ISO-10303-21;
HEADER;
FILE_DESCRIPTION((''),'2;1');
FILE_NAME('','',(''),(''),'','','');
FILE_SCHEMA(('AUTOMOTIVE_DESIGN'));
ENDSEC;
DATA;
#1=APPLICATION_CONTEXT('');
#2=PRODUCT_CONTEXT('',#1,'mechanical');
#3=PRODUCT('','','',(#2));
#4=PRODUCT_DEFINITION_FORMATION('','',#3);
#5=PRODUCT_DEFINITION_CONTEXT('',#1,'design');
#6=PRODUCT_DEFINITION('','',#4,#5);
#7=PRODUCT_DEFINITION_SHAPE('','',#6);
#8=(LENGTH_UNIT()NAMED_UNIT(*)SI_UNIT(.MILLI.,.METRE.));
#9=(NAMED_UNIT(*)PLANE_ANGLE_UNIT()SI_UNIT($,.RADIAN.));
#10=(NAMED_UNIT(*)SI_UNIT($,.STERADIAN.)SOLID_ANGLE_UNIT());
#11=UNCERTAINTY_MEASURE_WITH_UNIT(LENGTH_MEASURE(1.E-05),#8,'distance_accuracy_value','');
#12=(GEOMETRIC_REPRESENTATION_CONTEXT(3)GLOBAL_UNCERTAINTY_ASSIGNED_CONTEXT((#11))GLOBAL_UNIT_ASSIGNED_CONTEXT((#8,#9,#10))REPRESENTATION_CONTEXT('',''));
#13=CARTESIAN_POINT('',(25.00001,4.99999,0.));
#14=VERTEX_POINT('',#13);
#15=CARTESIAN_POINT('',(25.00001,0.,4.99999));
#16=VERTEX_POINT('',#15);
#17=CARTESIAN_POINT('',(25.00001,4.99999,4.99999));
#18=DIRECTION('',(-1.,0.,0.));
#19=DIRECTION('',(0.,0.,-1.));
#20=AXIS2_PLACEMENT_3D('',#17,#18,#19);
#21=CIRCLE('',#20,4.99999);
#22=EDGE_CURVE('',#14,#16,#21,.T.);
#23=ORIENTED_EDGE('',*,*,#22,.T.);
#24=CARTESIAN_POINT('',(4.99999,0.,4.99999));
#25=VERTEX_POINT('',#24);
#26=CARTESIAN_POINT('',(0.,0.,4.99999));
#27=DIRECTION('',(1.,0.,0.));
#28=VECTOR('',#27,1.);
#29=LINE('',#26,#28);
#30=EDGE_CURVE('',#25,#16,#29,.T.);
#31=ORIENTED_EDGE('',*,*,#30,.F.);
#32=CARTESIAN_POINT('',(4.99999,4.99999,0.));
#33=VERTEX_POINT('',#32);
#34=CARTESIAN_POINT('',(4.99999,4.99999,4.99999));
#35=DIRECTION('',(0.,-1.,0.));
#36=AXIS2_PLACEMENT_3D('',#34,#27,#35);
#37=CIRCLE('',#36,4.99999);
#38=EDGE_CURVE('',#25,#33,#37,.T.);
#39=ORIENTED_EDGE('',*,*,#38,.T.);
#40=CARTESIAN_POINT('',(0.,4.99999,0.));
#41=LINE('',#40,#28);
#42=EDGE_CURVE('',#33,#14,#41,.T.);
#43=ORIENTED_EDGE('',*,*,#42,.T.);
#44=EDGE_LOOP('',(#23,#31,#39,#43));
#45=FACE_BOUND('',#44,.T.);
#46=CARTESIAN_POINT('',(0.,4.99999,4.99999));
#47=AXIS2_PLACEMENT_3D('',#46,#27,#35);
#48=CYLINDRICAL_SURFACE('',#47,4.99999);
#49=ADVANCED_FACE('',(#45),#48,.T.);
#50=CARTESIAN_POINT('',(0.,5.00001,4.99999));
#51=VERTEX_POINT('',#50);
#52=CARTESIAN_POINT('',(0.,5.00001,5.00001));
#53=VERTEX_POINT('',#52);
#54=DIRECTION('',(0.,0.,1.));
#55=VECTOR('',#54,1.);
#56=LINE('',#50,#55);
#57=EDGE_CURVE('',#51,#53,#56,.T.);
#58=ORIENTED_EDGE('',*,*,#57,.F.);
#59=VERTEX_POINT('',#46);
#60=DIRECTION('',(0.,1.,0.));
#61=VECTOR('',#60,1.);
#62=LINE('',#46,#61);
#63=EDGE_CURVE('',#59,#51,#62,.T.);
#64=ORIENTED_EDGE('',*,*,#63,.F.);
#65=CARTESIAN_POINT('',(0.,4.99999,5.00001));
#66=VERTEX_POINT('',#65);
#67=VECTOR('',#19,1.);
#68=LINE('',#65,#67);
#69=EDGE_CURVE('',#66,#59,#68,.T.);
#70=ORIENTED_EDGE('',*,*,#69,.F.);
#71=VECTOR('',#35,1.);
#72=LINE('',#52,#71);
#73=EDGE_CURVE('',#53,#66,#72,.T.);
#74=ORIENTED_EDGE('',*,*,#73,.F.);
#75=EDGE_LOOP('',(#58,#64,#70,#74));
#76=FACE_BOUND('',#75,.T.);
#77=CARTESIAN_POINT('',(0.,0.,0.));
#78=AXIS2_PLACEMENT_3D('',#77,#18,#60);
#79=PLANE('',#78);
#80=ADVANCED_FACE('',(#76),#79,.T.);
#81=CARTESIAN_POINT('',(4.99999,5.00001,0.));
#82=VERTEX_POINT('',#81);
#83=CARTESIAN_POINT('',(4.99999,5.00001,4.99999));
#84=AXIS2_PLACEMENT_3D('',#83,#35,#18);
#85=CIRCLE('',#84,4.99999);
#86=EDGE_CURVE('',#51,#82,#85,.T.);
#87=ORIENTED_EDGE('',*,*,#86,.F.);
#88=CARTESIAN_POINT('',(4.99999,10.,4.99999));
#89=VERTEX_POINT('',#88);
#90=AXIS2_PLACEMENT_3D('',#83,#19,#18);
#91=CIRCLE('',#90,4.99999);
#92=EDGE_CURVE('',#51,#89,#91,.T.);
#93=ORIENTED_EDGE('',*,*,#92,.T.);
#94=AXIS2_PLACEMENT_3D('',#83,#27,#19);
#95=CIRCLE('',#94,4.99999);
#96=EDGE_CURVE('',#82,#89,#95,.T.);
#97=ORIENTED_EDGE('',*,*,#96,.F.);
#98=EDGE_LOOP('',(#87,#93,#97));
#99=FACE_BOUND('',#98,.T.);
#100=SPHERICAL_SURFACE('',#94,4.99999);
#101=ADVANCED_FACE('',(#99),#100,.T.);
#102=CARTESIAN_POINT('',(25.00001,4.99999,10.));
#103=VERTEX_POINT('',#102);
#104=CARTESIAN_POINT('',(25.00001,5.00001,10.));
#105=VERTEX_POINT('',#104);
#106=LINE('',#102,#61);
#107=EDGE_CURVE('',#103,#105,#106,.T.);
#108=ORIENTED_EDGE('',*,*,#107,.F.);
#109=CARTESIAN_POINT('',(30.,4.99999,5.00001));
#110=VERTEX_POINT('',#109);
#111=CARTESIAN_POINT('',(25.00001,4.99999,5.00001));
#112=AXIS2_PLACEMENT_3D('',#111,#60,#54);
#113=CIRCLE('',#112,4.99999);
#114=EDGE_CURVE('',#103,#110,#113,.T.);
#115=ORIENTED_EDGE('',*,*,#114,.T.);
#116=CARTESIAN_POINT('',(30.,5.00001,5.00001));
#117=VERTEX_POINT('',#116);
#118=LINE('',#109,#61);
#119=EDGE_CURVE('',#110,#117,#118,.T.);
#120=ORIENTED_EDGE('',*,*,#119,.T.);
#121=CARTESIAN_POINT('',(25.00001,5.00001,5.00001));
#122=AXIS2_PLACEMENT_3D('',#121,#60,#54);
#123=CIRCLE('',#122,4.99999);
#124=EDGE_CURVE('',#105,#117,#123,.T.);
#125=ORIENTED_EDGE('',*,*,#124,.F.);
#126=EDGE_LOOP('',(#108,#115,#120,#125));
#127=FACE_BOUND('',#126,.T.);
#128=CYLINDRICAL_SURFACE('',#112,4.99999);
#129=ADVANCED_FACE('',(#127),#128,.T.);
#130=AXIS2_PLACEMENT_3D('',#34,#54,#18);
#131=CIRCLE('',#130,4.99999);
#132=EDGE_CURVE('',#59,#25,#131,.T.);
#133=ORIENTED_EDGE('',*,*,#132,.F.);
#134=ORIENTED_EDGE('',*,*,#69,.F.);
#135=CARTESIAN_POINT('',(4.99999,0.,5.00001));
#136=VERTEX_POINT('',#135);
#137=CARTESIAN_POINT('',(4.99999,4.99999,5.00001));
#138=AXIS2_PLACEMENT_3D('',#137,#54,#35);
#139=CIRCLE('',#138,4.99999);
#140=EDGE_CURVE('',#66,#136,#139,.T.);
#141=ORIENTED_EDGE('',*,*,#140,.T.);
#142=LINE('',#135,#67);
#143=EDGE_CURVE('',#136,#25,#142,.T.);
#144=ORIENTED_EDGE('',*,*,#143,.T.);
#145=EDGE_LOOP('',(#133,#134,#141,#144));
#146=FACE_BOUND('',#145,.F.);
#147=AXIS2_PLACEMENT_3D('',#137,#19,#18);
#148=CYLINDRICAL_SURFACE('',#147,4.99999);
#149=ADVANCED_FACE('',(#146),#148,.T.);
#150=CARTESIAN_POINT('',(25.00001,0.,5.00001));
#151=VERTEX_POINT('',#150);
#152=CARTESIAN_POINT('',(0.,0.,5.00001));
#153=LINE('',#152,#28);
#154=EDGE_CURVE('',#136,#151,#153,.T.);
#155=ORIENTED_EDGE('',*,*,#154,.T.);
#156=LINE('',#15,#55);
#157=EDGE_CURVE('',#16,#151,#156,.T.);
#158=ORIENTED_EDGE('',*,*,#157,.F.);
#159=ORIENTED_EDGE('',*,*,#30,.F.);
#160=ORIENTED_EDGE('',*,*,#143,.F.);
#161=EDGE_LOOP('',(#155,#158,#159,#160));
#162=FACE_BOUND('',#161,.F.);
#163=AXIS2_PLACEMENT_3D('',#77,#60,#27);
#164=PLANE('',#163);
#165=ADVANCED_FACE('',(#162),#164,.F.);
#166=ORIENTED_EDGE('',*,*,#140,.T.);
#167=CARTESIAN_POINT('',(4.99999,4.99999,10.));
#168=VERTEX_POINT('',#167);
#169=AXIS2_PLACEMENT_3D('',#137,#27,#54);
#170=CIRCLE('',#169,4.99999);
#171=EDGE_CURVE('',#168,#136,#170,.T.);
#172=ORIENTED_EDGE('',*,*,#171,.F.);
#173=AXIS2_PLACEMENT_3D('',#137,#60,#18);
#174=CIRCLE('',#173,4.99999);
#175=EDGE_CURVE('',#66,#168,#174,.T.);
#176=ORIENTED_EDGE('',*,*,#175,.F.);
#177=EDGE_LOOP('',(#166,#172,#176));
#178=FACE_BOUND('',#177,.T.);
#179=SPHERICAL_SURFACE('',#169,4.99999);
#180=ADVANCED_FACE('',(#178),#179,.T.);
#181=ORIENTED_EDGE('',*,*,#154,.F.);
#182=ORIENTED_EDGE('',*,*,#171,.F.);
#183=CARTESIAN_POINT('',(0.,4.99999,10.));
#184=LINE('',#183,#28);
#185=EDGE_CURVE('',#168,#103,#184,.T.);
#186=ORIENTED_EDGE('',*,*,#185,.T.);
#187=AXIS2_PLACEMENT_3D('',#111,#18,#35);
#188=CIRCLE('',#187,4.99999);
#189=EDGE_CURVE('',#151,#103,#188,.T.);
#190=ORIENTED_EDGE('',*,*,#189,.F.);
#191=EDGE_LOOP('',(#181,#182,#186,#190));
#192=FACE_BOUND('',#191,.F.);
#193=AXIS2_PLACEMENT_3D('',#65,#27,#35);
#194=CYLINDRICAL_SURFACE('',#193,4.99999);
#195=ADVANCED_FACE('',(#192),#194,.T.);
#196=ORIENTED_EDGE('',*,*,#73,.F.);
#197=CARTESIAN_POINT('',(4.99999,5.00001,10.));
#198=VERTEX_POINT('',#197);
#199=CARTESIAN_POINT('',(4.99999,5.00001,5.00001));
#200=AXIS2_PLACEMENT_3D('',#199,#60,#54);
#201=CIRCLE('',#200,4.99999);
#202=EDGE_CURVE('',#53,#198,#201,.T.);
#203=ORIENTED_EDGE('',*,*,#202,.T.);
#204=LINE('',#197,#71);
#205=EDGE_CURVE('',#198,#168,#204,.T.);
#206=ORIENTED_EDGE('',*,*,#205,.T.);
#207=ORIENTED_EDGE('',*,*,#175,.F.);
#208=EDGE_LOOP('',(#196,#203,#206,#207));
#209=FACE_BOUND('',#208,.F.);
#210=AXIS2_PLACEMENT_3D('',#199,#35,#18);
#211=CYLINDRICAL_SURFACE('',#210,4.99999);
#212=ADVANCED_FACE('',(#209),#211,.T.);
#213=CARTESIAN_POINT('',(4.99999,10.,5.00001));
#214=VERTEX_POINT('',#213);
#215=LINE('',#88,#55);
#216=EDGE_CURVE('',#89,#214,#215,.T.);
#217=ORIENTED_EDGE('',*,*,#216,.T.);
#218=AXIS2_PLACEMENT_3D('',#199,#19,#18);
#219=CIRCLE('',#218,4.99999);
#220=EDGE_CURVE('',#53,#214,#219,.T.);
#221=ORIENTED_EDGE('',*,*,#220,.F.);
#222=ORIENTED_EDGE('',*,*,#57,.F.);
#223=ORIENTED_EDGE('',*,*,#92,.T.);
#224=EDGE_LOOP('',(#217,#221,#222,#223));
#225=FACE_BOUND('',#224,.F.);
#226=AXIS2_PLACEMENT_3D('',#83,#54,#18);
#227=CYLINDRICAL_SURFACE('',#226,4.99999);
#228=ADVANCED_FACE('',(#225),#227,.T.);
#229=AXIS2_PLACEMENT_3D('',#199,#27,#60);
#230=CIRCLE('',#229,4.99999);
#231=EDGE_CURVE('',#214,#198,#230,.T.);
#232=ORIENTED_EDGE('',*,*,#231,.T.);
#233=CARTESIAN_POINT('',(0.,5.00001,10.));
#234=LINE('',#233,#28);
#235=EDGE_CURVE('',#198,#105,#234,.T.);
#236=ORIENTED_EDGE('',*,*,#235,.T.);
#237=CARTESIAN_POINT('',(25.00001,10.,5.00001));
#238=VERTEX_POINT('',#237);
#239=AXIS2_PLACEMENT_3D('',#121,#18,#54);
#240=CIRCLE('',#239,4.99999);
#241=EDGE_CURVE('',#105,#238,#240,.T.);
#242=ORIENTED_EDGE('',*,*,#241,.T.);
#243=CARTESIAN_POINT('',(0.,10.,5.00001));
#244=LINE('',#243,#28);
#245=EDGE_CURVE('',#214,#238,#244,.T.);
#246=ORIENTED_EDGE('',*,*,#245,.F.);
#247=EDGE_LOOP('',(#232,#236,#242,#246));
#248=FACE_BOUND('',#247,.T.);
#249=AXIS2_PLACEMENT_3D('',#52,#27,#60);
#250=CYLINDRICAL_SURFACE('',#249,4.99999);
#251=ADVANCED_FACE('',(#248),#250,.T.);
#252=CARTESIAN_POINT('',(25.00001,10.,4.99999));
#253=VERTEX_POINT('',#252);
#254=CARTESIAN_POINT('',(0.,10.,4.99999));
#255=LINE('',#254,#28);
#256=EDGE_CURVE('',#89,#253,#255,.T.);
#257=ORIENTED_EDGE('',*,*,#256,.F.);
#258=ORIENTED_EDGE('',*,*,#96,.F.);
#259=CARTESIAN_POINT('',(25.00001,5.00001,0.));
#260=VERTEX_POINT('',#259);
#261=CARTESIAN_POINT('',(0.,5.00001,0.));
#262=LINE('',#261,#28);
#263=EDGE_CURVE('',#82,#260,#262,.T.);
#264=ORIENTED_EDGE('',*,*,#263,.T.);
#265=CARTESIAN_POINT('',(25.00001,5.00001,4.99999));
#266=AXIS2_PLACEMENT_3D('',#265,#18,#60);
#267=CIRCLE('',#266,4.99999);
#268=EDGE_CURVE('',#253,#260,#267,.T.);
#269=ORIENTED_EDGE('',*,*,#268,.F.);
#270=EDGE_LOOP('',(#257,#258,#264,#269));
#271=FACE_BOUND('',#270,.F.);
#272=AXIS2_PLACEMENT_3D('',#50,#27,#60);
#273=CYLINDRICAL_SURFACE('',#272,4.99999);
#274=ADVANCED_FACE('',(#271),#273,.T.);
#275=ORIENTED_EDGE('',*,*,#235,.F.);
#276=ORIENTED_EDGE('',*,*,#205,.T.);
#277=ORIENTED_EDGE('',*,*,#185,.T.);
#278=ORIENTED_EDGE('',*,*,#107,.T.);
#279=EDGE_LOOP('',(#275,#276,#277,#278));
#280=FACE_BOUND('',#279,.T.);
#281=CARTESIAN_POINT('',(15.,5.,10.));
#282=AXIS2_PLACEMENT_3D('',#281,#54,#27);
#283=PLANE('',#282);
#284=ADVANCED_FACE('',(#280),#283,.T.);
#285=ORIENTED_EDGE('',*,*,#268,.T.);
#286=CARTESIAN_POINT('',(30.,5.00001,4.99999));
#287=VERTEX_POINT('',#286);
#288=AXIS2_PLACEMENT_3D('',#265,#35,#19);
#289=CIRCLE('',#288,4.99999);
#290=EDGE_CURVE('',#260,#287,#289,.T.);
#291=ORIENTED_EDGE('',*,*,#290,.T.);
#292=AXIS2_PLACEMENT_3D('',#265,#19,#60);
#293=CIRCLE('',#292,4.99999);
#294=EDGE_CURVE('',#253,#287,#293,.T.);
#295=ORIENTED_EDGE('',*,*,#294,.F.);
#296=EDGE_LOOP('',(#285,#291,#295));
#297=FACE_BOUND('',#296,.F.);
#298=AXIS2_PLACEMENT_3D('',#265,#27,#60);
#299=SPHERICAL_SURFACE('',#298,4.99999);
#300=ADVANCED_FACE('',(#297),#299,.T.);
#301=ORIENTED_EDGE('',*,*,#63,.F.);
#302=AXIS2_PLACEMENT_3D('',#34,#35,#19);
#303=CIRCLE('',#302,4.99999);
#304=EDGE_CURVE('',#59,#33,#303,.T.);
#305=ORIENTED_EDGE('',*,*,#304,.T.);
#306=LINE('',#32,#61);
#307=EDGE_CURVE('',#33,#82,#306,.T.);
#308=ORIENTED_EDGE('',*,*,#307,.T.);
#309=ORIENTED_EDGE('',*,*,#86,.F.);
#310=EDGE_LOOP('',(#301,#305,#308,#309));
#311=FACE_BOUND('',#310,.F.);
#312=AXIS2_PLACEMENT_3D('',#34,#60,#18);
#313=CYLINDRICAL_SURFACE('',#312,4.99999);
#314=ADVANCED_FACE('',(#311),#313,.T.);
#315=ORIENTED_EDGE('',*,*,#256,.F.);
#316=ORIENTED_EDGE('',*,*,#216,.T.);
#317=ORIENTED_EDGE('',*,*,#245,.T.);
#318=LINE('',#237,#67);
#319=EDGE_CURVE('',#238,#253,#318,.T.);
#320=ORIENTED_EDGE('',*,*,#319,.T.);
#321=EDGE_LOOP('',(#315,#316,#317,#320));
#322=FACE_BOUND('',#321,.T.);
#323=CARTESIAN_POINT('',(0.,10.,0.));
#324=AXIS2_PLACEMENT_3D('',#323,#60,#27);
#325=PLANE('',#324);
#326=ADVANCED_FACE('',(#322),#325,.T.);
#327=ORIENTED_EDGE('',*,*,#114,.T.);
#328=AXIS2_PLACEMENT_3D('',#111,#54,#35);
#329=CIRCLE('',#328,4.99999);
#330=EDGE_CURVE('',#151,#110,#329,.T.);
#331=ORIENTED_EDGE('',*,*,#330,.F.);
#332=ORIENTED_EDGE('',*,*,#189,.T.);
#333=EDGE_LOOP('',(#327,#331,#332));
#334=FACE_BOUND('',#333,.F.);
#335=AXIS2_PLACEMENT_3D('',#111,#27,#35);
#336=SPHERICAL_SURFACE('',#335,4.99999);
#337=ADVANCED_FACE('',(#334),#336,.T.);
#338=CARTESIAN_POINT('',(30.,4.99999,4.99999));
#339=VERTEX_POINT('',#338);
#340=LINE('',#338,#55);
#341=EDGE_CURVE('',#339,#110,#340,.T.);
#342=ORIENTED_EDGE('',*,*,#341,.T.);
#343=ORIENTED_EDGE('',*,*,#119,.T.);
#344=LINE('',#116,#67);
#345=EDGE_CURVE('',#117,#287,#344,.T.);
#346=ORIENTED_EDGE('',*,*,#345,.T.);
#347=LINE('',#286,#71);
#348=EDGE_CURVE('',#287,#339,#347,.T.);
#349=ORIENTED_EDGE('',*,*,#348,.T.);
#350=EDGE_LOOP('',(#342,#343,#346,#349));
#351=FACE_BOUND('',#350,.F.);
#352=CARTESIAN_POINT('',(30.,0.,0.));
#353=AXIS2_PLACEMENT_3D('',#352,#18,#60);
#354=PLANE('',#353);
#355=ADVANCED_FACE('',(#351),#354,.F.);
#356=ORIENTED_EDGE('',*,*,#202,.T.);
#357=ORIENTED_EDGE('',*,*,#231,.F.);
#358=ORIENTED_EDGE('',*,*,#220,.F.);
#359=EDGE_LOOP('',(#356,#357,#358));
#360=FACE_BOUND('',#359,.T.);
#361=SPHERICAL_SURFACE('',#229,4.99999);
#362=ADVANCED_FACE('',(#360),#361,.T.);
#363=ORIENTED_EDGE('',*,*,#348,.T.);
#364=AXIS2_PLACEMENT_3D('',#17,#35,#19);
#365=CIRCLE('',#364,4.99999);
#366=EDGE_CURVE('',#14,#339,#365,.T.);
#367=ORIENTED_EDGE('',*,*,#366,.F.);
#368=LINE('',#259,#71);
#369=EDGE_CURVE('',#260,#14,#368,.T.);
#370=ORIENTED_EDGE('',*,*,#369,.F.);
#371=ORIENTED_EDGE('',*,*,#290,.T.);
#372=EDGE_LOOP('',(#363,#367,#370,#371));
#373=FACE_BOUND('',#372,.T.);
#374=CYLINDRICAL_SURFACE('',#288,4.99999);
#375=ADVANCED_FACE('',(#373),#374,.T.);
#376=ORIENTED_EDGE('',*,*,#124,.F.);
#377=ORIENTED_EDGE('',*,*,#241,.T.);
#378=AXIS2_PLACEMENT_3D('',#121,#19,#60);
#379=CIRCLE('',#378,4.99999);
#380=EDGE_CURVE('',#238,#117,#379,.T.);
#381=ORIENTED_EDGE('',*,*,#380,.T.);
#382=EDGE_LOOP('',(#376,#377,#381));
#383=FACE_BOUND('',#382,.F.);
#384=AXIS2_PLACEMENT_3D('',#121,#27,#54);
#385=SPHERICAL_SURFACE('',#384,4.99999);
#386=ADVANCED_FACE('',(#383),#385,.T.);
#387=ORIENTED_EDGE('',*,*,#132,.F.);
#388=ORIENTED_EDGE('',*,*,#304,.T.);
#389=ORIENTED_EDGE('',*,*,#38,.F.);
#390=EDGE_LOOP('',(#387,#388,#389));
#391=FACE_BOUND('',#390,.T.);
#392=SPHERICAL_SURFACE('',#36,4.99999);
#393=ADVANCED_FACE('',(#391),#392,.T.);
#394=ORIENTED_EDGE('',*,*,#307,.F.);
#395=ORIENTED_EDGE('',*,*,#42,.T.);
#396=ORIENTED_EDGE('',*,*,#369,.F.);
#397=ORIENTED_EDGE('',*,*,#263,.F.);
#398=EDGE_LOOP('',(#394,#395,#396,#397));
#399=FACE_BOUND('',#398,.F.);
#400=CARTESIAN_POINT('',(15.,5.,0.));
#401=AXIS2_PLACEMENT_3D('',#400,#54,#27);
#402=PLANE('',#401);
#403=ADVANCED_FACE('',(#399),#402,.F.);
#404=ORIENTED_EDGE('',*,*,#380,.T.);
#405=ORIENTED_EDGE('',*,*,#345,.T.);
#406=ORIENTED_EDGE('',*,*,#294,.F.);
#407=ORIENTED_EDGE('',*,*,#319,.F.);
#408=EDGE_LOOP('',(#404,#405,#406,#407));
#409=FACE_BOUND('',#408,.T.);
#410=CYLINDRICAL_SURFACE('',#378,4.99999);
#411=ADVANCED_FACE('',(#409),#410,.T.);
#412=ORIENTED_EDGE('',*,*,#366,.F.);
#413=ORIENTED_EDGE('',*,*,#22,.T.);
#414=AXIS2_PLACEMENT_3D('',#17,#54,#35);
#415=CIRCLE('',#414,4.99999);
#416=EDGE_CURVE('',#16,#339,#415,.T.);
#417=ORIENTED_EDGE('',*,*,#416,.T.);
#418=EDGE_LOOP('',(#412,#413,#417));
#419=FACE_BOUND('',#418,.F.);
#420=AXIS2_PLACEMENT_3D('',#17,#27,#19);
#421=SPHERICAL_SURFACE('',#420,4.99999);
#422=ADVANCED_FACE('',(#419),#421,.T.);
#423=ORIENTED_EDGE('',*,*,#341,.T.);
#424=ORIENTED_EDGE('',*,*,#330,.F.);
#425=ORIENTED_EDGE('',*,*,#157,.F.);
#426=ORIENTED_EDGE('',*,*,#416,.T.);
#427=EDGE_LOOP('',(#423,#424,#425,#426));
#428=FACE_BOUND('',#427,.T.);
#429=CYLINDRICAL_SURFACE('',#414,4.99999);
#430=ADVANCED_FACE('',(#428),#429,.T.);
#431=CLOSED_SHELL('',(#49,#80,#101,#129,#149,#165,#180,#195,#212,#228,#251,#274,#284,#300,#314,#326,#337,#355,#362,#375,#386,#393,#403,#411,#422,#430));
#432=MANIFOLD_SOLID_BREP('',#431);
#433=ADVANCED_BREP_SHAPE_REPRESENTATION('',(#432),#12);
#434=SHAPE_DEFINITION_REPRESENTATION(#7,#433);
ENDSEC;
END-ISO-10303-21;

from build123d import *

# Parameters (mm, degrees)
F0_W     = 30
F0_H     = 10
F1_DEPTH = 10
F2_R     = 4.99999
F3_R     = 4.99999


# Not quite as in the source:
# - a fillet or chamfer is up to 0.001 mm smaller than in the source, because OpenCascade refuses the exact size


with BuildPart() as f1:
    # F0 (on Top) → F1 (new body)
    with BuildSketch(Plane.XY):
        with Locations((15, 5)):
            Rectangle(F0_W, F0_H)
    extrude(amount=F1_DEPTH)

    # F2 (radius 5 in the source; OpenCascade refuses exactly that, so slightly less here)
    f2_edges = [f1.edges().sort_by_distance(p)[0] for p in [
        (15, 0, 10),
        (15, 0, 0),
        (15, 10, 0),
        (15, 10, 10),
    ]]
    fillet(f2_edges, radius=F2_R)

    # F3 (radius 5 in the source; OpenCascade refuses exactly that, so slightly less here)
    f3_edges = [f1.edges().sort_by_distance(p)[0] for p in [
        (30, 0, 5),
        (30, 1.464463, 1.464463),
        (30, 1.464463, 8.535537),
        (30, 5, 0),
        (30, 5, 10),
        (30, 8.535537, 1.464463),
        (30, 8.535537, 8.535537),
        (30, 10, 5),
        (0, 10, 5),
        (0, 8.535537, 1.464463),
        (0, 8.535537, 8.535537),
        (0, 5, 0),
        (0, 5, 10),
        (0, 1.464463, 1.464463),
        (0, 1.464463, 8.535537),
        (0, 0, 5),
    ]]
    fillet(f3_edges, radius=F3_R)


solid = f1.part
